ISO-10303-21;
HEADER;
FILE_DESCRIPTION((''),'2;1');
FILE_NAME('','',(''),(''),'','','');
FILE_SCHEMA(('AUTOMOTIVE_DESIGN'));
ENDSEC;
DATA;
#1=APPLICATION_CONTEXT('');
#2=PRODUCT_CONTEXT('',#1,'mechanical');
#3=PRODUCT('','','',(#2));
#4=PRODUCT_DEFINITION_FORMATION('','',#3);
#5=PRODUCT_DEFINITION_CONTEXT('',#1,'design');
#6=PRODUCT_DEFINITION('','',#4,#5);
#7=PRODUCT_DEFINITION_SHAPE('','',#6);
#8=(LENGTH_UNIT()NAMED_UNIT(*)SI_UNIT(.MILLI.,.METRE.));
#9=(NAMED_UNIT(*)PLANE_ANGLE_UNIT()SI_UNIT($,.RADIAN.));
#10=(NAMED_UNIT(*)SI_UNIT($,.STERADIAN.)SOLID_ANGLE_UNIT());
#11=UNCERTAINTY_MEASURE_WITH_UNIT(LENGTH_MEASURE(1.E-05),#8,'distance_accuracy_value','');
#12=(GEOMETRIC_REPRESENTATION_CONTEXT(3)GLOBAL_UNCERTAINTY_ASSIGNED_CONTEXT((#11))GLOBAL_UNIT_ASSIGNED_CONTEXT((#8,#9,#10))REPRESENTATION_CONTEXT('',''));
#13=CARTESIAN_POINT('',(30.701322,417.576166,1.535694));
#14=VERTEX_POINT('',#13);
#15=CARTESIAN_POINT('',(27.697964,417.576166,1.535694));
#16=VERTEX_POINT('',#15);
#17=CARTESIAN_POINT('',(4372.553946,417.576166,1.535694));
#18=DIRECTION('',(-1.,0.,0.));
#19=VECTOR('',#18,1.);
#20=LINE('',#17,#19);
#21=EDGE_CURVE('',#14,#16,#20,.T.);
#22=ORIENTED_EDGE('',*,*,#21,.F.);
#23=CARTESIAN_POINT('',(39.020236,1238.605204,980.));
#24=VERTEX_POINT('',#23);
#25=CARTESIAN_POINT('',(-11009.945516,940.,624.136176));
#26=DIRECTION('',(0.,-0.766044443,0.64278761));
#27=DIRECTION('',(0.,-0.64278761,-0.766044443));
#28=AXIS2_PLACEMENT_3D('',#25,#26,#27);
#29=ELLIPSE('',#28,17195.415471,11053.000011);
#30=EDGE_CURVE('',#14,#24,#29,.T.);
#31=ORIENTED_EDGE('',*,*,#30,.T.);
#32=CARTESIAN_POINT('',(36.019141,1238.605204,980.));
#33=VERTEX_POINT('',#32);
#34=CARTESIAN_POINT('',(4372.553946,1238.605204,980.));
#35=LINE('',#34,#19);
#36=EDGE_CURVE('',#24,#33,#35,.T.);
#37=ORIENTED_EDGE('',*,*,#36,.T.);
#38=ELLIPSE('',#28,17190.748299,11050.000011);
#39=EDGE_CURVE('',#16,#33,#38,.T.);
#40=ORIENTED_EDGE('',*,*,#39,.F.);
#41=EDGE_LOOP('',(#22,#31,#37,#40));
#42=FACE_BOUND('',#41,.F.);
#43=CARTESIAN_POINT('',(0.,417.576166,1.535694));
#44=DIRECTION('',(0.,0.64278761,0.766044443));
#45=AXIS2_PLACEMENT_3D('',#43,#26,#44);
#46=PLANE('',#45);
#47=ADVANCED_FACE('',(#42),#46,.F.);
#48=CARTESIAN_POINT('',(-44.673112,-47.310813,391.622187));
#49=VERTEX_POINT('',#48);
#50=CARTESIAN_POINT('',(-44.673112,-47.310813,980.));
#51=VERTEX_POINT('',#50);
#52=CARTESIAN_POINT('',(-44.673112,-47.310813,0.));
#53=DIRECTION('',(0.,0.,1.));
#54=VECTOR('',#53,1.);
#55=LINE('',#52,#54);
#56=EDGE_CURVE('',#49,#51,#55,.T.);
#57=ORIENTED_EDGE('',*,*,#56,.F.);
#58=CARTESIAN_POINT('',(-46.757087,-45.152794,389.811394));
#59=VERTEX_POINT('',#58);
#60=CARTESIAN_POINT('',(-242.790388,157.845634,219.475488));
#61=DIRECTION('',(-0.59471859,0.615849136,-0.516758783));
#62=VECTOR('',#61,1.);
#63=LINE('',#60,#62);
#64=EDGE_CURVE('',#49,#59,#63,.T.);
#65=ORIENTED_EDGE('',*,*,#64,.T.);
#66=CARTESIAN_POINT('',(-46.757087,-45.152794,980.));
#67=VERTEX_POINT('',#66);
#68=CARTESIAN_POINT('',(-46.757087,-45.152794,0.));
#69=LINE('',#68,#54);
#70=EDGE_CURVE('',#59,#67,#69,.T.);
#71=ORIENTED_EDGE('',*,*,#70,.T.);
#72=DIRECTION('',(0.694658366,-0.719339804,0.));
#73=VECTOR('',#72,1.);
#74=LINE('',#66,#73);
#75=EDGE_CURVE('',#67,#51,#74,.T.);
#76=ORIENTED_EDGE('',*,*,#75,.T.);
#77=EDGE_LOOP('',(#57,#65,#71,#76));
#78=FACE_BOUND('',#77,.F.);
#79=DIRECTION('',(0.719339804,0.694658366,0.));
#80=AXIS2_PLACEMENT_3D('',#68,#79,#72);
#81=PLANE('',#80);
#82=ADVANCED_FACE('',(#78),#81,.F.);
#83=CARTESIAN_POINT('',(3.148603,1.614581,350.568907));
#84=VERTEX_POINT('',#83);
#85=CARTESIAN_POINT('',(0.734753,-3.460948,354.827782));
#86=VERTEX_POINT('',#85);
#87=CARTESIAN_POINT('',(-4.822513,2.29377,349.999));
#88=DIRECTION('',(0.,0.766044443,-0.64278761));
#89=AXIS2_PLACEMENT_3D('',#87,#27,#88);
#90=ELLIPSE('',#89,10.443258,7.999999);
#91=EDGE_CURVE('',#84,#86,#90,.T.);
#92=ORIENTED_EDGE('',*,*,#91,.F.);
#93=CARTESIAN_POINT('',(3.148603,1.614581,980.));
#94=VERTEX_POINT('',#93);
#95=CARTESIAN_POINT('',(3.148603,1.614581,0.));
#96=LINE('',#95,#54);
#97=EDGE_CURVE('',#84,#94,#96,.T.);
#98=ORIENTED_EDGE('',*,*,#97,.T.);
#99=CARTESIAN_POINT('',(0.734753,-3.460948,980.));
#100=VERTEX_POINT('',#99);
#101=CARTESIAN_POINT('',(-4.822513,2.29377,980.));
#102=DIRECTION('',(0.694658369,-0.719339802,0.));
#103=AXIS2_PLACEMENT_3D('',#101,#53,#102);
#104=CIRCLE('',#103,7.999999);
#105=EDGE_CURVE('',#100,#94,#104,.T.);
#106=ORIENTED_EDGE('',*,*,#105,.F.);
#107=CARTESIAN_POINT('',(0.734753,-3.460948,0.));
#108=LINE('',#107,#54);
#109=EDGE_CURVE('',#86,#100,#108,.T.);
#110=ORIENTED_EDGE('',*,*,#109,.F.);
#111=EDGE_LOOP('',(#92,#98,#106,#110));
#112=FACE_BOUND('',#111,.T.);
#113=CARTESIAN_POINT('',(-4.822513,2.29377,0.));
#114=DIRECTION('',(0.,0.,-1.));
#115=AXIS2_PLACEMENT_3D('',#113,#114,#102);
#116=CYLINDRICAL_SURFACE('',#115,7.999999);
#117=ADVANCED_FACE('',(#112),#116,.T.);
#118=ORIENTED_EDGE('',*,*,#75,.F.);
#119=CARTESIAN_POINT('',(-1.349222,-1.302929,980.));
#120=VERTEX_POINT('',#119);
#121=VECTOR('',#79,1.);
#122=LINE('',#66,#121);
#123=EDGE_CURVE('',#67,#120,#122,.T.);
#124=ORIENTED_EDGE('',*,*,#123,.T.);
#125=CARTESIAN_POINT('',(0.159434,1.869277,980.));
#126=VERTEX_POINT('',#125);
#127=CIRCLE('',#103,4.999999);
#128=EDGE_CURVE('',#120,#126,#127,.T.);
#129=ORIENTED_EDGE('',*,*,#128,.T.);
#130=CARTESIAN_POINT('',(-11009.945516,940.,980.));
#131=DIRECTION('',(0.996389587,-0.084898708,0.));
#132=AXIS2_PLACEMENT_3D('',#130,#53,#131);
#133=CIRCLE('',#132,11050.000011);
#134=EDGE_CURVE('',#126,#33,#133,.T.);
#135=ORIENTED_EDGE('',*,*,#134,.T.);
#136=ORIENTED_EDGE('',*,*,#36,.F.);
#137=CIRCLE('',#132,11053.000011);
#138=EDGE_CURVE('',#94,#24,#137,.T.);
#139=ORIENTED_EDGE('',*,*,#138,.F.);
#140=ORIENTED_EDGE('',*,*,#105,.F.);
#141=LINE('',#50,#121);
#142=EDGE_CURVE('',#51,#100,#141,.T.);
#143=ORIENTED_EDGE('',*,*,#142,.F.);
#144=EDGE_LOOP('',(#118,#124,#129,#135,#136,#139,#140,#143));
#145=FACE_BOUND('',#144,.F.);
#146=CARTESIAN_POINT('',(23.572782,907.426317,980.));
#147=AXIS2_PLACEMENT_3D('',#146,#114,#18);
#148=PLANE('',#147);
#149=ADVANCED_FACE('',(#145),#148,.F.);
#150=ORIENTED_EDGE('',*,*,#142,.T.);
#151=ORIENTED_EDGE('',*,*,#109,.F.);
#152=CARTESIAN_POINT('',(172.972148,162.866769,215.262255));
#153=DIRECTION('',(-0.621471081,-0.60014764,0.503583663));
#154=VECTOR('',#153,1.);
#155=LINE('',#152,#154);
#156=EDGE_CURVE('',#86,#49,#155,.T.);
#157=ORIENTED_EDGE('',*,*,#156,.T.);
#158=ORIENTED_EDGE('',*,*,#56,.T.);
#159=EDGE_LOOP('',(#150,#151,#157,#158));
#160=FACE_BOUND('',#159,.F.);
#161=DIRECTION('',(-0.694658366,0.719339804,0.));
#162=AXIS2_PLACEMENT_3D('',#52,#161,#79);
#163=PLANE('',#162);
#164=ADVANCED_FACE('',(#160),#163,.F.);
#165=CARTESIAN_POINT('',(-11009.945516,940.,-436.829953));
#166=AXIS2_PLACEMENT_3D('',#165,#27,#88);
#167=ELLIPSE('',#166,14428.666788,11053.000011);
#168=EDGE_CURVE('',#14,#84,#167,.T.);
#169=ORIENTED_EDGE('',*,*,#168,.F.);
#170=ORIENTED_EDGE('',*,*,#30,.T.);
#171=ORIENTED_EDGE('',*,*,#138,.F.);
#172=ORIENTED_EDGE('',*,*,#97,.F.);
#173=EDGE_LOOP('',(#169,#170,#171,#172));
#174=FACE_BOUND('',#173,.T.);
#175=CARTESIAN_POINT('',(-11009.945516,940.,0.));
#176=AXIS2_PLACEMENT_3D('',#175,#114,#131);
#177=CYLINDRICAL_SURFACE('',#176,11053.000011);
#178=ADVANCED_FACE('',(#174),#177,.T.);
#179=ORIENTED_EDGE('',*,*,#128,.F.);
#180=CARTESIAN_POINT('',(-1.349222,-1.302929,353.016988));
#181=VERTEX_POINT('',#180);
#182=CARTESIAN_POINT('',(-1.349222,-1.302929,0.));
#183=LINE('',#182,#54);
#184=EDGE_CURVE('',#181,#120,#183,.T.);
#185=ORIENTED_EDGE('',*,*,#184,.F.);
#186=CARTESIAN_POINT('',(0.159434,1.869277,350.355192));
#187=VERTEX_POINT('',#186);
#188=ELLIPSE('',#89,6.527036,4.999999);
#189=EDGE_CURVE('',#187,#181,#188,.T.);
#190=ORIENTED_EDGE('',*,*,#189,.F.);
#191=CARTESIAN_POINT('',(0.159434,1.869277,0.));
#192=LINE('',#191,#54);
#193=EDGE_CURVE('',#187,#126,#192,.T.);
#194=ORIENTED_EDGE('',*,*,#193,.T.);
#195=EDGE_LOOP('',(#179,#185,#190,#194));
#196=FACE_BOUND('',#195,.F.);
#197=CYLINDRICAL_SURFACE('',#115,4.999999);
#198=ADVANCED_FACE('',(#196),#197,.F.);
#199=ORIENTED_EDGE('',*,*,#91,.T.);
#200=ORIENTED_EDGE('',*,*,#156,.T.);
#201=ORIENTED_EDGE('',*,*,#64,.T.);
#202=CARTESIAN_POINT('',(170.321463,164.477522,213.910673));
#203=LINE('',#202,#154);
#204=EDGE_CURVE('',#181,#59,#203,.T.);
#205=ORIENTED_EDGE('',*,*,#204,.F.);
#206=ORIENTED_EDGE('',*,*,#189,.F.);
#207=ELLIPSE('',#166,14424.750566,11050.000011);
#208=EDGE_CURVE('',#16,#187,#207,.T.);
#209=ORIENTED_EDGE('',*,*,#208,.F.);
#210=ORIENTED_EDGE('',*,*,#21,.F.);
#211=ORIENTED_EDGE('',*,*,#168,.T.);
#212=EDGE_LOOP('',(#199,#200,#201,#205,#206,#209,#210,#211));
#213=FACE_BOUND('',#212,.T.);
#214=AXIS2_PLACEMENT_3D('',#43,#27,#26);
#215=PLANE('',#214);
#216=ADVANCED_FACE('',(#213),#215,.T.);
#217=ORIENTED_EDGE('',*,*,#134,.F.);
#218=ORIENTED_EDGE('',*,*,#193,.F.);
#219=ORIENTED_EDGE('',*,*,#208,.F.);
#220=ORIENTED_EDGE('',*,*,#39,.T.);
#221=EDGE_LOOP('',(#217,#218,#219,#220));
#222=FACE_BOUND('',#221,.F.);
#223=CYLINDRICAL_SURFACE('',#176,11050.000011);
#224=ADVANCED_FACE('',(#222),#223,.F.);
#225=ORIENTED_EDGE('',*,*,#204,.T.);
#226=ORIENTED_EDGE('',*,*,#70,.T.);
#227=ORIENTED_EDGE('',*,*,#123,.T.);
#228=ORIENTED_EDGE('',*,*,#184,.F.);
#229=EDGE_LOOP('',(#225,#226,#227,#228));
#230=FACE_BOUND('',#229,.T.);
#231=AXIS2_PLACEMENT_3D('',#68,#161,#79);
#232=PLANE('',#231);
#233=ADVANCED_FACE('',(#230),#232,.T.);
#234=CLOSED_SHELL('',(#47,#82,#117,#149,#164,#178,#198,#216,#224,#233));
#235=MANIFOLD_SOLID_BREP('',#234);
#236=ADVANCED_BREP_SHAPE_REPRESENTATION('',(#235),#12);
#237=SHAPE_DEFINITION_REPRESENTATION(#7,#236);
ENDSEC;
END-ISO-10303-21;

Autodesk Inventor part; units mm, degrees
ref_plane "YZ Plane" through (0, 0, 0) normal (1, 0, 0) x (0, 1, 0)
ref_plane "XZ Plane" through (0, 0, 0) normal (0, 1, 0) x (-1, 0, 0)
ref_plane "XY Plane" through (0, 0, 0) normal (0, 0, 1) x (1, 0, 0)
sketch "Sketch1" plane through (0, 0, 0) normal (0, 0, 1) x (1, 0, 0)
  line L0 (8972.064376, -2416.982713) -> (8972.064376, -2466.982713) construction
  line L1 (0, 47) -> (0, 0) construction
  arc A0 (0.159434, 1.869277) -> (0, 1880) centre (-11009.945504, 940) ccw
  arc A1 (0, 0) -> (0.159434, 1.869277) centre (-11009.945504, 940) ccw construction
  arc A2 (-1.349222, -1.302929) -> (0.159434, 1.869277) centre (-4.822514, 2.29377) ccw
  line L2 (-1.349222, -1.302929) -> (0, 0) construction
  line L3 (-46.757087, -45.152794) -> (-1.349222, -1.302929)
  line L4 (-41.190716, -50.91694) -> (-46.757087, -45.152794) construction
  line L5 (0, 0) -> (0, 1880) construction
  line L6 (0, 0) -> (1.875639, 0) construction
  dimension "d154" = 5
  dimension "d155" = 65
  dimension "d156" = 11050
  dimension "d157" = 136
  dimension "d158" = 1880
contour flange "Contour Flange2" sketch "Sketch1" thickness 3 bend radius 3 width 980 along (0, 0, 1) mid plane no both sides no wall seen from (-24.053155, -23.227861, 0) lies toward (0.6946584, -0.7193398, 0) curves L3 A2 A0
bend "Bend2"
corner "Corner2"
sketch "Sketch5" plane through (0, 0, 0) normal (1, 0, 0) x (0, 1, 0)
  line L0 (1.614581, 980) -> (1.614581, 0)
  line L1 (1.614581, 0) -> (1880.255204, 0)
  line L2 (1880.255204, 0) -> (1880.255204, 980)
  line L3 (1.614581, 980) -> (1880.255204, 980)
  line L4 (1.614581, 980) -> (1.614581, 0)
  line L5 (-3.460948, 980) -> (1.614581, 980)
  line L6 (-3.460948, 980) -> (-3.460948, 0)
  line L7 (-3.460948, 0) -> (1.614581, 0)
  line L8 (-3.460948, 980) -> (-3.460948, 0)
  line L9 (-47.310813, 980) -> (-3.460948, 980)
  line L10 (-47.310813, 0) -> (-47.310813, 980)
  line L11 (-47.310813, 0) -> (-3.460948, 0)
  line L12 (1238.605204, 0) -> (416.287565, 980)
  line L13 (419.406335, 980) -> (-47.310813, 588.377813)
  line L14 (419.406335, 0) -> (-47.310813, 391.622187)
  line L15 (416.287565, 0) -> (1238.605204, 980)
  point P0 (0, 0)
  point P1 (-3.460948, 0)
  point P2 (1.614581, 0)
  dimension "d161" = 40
  dimension "d162" = 40
  dimension "d163" = 641.65
  dimension "d164" = 641.65
  dimension "d166" = 300
  dimension "d167" = 300
extrude "Extrusion3" cut sketch "Sketch5" along normal through all both and the other way through all contours L14 L15 L1 L0 | L0 L7 L6 L14 | L15 L12 L1 L14 | L14 L1 L15 | L6 L11 L10 L14 | L15 L3 L2 L1 L12
sketch "Sketch8" plane through (-1.349222, -1.302929, 980) normal (-0.6946584, 0.7193398, 0) x (0.7193398, 0.6946584, 0)
  line L0 (-39.124361, 25.740843) -> (-51.124361, 25.740843) construction
  line L1 (-51.124361, 25.740843) -> (-51.124361, 162.747026) construction
  line L2 (-51.124361, 162.747026) -> (-39.124361, 162.747026) construction
  line L3 (-39.124361, 162.747026) -> (-39.124361, 25.740843) construction
  line L4 (-63.124361, 0) -> (-63.124361, 590.188606)
  point P0 (1.875639, 980)
  dimension "d168" = 12
  dimension "d169" = 12
mark "Mark5"
equation "\"d36\" = Thickness"
equation "\"d37\" = BendReliefWidth"
equation "\"d38\" = BendReliefDepth"
equation "\"d39\" = MinimumRemnant"
equation "\"d40\" = TransitionRadius"
equation "\"d42\" = BendRadius"
equation "\"d44\" = CornerReliefSize"
equation "\"d45\" = GapSize"
equation "\"d46\" = JacobiRadiusSize"
equation "\"BendRadius\" = Thickness"
equation "\"BendReliefWidth\" = Thickness"
equation "\"BendReliefDepth\" = 0.5 * Thickness"
equation "\"CornerReliefSize\" = 4 * Thickness"
equation "\"MinimumRemnant\" = 2 * Thickness"
equation "\"TransitionRadius\" = BendRadius"
equation "\"JacobiRadiusSize\" = BendRadius"
equation "\"GapSize\" = Thickness"
equation "\"Thickness\" = 3"
properties part number "MSC 304 sheet right board face" material "AISI304"
